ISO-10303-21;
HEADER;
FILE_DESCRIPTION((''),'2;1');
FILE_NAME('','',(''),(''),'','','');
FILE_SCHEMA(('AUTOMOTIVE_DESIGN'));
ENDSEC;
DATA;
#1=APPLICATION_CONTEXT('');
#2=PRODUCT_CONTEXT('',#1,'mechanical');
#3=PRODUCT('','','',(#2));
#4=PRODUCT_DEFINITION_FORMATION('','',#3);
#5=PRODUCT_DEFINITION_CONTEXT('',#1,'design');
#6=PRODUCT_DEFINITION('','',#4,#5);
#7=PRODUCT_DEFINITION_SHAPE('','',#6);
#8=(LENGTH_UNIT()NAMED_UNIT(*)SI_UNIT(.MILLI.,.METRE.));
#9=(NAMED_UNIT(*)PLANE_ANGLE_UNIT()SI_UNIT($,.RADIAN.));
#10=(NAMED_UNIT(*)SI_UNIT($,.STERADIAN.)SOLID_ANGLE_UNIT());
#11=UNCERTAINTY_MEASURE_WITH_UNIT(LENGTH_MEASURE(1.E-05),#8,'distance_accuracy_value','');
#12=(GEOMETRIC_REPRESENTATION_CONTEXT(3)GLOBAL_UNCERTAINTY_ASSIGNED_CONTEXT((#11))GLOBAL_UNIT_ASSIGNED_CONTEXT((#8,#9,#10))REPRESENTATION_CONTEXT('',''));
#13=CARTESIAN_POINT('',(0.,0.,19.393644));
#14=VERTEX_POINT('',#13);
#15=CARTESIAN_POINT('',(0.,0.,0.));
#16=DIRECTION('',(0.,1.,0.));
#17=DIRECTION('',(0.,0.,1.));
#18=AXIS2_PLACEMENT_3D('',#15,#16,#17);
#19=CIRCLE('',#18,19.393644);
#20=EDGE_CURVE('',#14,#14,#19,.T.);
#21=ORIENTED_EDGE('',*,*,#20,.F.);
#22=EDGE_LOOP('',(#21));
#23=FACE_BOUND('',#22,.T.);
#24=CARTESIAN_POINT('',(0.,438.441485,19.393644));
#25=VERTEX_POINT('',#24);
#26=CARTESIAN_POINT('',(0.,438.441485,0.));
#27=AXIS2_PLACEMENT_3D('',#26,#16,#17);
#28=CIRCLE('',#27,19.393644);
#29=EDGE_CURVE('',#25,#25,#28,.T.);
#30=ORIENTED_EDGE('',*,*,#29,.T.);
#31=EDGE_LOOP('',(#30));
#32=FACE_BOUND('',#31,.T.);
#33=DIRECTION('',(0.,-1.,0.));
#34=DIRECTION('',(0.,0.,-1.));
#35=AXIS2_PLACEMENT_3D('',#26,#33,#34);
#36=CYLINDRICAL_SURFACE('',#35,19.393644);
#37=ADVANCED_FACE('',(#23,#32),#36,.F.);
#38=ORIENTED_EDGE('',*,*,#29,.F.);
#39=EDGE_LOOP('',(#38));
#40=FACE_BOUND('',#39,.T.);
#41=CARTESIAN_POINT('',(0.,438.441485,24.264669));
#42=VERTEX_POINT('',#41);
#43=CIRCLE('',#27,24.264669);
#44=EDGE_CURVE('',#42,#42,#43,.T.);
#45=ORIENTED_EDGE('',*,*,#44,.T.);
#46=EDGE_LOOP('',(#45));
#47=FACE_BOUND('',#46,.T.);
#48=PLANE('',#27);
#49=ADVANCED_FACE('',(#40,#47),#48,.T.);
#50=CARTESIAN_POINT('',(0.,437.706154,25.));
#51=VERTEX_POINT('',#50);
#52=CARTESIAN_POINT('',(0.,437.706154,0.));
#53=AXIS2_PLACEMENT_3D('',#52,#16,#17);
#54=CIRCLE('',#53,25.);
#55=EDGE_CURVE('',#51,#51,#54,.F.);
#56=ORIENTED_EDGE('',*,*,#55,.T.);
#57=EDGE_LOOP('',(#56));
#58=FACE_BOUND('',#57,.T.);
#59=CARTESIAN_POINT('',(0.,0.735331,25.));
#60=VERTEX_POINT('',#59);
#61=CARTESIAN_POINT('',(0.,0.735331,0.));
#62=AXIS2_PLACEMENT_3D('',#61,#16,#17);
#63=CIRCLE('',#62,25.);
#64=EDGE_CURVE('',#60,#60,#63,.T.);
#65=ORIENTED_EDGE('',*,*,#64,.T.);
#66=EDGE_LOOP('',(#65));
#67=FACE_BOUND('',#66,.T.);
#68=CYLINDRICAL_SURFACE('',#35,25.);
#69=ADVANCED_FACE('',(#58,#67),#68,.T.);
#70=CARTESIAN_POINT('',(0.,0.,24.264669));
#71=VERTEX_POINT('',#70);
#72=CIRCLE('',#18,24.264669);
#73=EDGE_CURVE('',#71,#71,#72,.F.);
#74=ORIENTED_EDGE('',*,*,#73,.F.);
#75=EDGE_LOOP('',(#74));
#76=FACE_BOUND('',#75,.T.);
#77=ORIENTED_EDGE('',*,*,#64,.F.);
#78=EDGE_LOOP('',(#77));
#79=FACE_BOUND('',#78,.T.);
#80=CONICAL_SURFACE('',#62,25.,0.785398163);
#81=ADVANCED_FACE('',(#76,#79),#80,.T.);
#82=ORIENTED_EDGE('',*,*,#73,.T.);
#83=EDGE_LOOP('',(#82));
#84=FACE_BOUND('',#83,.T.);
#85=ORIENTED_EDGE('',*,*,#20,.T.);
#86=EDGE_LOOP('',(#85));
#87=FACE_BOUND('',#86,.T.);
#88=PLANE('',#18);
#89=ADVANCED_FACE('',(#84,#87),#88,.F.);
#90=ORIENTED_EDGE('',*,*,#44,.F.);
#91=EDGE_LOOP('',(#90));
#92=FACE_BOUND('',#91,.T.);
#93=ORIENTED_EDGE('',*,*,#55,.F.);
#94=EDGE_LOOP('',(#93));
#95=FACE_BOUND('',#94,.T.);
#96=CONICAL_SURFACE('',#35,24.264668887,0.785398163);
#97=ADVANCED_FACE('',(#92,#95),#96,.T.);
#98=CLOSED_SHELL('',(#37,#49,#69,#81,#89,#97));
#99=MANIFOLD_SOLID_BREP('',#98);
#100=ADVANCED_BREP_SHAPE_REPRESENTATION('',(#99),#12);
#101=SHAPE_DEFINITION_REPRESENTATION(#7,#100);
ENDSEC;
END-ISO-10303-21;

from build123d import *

# Parameters (mm, degrees)
SKETCH1_R           = 25
BOSS_EXTRUDE1_DEPTH = 438.441485318
SKETCH2_R           = 19.393643577
CUT_EXTRUDE1_DEPTH  = 440.864679246
CHAMFER1_SIZE       = 0.735331113


with BuildPart() as part:
    # Sketch1 → Boss-Extrude1 (new body)
    with BuildSketch(Plane(origin=(0, 0, 0), x_dir=(1, 0, 0), z_dir=(0, 1, 0))):
        Circle(SKETCH1_R)
    extrude(amount=BOSS_EXTRUDE1_DEPTH)

    # Sketch2 → Cut-Extrude1 (cut, through all)
    with BuildSketch(Plane(origin=(0, 0, 0), x_dir=(1, 0, 0), z_dir=(0, 1, 0))):
        Circle(SKETCH2_R)
    extrude(amount=CUT_EXTRUDE1_DEPTH, mode=Mode.SUBTRACT)

    # Chamfer1
    chamfer1_edges = [part.edges().sort_by_distance(p)[0] for p in [
        (-25, 438.441485318, 0),
        (-25, 0, 0),
    ]]
    chamfer(chamfer1_edges, length=CHAMFER1_SIZE)


solid = part.part
